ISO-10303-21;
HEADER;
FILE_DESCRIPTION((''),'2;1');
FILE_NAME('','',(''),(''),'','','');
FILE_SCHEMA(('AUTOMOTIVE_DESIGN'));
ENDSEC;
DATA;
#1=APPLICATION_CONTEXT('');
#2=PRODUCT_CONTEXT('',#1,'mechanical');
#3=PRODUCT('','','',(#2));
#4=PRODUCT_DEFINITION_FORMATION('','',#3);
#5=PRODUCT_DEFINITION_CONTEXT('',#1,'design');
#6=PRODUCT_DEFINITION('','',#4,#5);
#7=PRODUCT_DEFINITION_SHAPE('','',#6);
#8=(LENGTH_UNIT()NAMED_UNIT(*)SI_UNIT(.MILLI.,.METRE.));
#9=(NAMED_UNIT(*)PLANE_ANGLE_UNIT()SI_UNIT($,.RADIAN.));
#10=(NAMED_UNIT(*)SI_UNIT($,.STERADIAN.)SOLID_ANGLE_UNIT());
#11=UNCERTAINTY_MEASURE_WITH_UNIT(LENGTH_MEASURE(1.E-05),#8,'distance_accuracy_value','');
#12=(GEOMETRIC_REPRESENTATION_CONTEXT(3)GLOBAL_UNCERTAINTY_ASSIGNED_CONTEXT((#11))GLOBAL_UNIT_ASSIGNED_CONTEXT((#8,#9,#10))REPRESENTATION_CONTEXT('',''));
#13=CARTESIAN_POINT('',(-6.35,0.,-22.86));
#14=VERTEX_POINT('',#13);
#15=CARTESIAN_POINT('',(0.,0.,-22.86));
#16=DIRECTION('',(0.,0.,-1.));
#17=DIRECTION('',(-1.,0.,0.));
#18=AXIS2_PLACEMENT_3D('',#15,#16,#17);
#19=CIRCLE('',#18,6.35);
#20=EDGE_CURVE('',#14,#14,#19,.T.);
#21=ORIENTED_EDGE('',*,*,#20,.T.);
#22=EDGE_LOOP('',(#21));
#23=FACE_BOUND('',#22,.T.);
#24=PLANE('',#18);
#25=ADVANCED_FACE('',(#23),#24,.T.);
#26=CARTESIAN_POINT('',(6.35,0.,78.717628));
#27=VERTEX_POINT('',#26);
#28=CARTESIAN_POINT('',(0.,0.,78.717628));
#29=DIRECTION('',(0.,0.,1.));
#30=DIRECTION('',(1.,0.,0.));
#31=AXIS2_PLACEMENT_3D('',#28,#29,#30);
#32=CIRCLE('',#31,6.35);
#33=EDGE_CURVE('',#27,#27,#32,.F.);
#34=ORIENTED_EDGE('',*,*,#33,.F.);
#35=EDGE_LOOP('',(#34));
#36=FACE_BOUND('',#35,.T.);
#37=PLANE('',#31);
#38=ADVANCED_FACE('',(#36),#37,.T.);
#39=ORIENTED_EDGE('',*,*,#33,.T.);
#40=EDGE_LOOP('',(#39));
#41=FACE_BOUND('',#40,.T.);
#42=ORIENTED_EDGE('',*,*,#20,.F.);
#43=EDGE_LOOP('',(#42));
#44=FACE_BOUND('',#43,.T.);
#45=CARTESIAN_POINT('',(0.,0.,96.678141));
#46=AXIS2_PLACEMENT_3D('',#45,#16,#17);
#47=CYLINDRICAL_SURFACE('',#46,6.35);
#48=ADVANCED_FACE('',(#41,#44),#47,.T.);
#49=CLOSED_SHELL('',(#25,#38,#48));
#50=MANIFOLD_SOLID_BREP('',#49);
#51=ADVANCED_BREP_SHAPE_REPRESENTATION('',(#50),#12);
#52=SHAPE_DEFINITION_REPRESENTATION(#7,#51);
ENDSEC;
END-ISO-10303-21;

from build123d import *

# Parameters (mm, degrees)
BOSS_EXTRUDE1_START     = -101.577628265
BOSS_EXTRUDE1_OUTLINE_R = 6.35
BOSS_EXTRUDE1_DEPTH     = 101.577628265


# Read off the part's stored shape, not the designer's step: Boss-Extrude1
with BuildPart() as part:
    # Boss-Extrude1 outline → Boss-Extrude1 (new body)
    with BuildSketch(Plane(origin=(0, 0, -22.86), x_dir=(-1, 0, 0), z_dir=(0, 0, -1)).offset(BOSS_EXTRUDE1_START)):
        Circle(BOSS_EXTRUDE1_OUTLINE_R)
    extrude(amount=BOSS_EXTRUDE1_DEPTH)


solid = part.part
